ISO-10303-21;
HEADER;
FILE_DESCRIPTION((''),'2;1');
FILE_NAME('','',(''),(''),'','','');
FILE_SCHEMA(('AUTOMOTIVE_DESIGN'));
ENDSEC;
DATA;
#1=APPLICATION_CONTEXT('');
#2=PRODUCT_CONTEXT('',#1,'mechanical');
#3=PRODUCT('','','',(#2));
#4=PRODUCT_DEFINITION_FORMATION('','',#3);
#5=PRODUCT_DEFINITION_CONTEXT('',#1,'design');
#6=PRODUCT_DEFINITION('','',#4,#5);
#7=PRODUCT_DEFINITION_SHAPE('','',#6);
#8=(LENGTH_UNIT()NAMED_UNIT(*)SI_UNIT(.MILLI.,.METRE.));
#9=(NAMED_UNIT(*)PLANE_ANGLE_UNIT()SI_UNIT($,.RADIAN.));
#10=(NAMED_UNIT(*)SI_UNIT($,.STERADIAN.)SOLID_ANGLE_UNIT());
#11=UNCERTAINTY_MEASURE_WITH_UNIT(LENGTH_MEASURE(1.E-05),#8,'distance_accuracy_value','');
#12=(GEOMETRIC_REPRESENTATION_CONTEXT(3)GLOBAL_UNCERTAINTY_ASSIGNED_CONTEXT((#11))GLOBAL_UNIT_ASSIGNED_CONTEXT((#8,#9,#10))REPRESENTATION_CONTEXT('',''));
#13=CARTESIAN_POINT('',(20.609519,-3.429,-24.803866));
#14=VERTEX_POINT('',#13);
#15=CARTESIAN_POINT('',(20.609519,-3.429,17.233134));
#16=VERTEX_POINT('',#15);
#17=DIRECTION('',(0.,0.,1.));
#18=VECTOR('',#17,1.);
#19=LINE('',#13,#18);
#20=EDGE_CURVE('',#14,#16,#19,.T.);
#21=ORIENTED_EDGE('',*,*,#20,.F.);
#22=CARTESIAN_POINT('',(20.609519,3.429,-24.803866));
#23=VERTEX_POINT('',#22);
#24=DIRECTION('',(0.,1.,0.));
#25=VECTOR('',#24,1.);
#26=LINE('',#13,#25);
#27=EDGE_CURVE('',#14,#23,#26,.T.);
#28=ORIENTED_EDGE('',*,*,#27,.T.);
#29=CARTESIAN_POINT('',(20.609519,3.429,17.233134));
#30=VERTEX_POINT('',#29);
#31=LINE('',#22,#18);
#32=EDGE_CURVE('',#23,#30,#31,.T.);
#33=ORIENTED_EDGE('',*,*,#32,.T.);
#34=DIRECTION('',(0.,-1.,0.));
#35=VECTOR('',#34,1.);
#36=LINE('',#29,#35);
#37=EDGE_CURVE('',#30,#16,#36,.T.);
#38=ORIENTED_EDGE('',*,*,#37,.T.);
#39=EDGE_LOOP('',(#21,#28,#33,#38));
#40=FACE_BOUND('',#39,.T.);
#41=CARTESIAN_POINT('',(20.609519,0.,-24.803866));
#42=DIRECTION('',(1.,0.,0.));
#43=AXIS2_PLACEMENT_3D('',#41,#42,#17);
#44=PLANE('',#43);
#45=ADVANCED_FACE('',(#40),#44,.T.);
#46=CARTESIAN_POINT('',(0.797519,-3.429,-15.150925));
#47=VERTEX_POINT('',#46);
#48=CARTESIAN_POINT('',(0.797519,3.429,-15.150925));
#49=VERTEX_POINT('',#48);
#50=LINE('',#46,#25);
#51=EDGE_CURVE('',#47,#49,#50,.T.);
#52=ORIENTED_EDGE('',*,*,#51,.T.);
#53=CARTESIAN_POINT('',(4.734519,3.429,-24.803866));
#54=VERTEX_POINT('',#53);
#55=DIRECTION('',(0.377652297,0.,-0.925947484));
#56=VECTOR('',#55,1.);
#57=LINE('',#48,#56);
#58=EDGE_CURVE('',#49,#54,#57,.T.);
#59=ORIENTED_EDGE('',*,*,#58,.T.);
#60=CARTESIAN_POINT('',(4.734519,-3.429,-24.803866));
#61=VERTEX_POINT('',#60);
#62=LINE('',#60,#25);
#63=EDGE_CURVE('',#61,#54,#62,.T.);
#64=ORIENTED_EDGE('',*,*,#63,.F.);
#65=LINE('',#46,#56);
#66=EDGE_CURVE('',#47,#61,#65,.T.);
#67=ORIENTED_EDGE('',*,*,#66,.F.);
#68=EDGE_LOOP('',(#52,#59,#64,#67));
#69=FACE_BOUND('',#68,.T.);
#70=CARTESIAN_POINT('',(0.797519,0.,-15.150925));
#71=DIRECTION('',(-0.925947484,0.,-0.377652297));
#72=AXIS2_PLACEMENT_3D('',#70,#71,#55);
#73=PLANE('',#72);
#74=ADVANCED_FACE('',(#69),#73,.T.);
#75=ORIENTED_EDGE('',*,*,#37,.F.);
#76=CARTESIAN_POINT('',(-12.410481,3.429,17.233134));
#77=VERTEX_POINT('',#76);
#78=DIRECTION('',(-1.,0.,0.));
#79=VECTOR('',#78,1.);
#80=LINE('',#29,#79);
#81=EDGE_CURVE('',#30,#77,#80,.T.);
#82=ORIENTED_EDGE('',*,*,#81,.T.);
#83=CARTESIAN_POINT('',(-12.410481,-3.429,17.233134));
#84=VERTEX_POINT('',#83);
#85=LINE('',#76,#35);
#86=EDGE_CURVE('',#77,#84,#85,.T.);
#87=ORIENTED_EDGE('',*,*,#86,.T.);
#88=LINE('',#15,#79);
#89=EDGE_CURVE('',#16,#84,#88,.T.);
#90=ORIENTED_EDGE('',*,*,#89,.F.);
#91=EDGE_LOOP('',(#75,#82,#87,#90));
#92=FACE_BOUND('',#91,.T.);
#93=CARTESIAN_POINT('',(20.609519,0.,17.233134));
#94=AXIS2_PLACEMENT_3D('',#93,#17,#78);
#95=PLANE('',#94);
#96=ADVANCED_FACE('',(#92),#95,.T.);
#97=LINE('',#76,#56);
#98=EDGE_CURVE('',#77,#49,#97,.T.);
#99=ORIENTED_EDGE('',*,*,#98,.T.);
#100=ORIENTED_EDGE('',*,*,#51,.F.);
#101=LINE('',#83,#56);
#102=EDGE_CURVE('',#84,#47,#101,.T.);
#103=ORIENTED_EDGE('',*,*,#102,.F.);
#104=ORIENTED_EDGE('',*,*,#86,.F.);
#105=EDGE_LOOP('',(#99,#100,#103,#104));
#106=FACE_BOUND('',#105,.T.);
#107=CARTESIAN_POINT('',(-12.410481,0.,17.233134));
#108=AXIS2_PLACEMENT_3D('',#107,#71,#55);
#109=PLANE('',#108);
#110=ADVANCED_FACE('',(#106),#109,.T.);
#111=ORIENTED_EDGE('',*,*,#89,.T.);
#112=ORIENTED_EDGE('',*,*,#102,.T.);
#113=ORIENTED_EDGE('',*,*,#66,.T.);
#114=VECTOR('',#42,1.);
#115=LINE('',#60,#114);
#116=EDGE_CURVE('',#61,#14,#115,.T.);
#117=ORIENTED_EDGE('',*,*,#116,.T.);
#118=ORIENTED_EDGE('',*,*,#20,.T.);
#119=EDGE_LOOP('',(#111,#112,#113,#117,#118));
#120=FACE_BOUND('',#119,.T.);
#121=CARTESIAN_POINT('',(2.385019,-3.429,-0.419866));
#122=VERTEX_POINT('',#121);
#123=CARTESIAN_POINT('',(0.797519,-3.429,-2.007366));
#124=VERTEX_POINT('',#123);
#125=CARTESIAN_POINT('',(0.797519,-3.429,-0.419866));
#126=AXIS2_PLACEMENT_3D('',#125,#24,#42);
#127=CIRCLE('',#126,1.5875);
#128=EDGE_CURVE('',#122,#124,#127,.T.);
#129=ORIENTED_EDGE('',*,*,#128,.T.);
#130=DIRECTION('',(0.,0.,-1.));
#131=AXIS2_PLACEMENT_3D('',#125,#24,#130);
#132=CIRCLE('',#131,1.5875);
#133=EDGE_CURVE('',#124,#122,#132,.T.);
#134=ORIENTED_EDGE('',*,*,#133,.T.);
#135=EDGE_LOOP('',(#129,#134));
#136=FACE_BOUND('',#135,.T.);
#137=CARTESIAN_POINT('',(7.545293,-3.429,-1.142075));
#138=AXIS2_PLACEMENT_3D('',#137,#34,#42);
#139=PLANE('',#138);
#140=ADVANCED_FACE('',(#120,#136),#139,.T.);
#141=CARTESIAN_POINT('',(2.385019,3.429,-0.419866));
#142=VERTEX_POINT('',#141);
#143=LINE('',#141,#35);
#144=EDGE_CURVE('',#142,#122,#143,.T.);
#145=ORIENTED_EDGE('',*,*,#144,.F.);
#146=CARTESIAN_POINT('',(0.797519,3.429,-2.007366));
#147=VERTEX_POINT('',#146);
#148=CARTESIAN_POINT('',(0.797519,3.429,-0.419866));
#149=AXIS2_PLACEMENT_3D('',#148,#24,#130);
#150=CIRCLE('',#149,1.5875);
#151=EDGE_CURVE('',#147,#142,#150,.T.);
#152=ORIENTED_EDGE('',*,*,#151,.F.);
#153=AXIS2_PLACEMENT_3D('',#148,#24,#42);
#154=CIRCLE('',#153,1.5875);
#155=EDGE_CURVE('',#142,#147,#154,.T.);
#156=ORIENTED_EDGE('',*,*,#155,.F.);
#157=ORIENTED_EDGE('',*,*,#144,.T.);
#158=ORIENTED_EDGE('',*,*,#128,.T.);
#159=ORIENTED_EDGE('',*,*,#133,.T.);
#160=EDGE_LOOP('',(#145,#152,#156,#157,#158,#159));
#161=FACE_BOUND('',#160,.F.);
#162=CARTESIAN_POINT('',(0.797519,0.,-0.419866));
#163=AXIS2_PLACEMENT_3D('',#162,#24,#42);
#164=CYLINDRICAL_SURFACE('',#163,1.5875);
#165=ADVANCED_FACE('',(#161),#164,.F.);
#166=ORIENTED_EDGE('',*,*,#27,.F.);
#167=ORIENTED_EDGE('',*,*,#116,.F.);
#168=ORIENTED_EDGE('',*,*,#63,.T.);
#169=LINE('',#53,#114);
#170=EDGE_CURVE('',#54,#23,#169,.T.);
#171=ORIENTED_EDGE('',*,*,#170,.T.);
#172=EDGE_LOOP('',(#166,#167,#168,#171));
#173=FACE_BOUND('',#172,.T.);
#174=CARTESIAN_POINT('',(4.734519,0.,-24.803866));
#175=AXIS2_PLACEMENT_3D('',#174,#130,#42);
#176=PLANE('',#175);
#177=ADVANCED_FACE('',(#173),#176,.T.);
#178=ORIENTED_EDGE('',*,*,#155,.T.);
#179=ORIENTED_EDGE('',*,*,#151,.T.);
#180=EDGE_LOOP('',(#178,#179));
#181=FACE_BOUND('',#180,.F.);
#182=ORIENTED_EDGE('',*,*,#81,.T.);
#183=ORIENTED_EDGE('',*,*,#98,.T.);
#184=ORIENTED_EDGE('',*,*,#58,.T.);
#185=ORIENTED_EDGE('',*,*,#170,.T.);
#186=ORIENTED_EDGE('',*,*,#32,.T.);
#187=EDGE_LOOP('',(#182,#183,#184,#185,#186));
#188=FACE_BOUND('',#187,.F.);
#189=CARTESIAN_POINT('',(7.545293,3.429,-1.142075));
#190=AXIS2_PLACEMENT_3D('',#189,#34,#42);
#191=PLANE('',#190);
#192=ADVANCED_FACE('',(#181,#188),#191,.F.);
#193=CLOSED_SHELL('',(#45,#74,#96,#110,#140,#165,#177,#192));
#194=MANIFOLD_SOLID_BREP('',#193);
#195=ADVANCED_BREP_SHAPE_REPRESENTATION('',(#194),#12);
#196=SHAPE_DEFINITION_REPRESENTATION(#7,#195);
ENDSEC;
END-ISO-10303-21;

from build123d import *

# Parameters (mm, degrees)
F1_DEPTH = 3.429


with BuildPart() as f1:
    # F0 (on Front) → F1 (new body, symmetric)
    with BuildSketch(Plane.XZ):
        Polygon((20.6095185396, -24.8038658976), (20.6095185396, 17.2331341024), (-12.4104814604, 17.2331341024), (0.7975185396, -15.1509251569), (4.7345185396, -24.8038658976), align=None)
        with BuildLine():
            ThreePointArc((2.3850185396, -0.4198658976), (1.9200505547, -1.5423979128), (0.7975185396, -2.0073658976))
            ThreePointArc((0.7975185396, -2.0073658976), (-0.3250134755, 0.7026661175), (2.3850185396, -0.4198658976))
        make_face(mode=Mode.SUBTRACT)
    extrude(amount=F1_DEPTH, both=True)


solid = f1.part
